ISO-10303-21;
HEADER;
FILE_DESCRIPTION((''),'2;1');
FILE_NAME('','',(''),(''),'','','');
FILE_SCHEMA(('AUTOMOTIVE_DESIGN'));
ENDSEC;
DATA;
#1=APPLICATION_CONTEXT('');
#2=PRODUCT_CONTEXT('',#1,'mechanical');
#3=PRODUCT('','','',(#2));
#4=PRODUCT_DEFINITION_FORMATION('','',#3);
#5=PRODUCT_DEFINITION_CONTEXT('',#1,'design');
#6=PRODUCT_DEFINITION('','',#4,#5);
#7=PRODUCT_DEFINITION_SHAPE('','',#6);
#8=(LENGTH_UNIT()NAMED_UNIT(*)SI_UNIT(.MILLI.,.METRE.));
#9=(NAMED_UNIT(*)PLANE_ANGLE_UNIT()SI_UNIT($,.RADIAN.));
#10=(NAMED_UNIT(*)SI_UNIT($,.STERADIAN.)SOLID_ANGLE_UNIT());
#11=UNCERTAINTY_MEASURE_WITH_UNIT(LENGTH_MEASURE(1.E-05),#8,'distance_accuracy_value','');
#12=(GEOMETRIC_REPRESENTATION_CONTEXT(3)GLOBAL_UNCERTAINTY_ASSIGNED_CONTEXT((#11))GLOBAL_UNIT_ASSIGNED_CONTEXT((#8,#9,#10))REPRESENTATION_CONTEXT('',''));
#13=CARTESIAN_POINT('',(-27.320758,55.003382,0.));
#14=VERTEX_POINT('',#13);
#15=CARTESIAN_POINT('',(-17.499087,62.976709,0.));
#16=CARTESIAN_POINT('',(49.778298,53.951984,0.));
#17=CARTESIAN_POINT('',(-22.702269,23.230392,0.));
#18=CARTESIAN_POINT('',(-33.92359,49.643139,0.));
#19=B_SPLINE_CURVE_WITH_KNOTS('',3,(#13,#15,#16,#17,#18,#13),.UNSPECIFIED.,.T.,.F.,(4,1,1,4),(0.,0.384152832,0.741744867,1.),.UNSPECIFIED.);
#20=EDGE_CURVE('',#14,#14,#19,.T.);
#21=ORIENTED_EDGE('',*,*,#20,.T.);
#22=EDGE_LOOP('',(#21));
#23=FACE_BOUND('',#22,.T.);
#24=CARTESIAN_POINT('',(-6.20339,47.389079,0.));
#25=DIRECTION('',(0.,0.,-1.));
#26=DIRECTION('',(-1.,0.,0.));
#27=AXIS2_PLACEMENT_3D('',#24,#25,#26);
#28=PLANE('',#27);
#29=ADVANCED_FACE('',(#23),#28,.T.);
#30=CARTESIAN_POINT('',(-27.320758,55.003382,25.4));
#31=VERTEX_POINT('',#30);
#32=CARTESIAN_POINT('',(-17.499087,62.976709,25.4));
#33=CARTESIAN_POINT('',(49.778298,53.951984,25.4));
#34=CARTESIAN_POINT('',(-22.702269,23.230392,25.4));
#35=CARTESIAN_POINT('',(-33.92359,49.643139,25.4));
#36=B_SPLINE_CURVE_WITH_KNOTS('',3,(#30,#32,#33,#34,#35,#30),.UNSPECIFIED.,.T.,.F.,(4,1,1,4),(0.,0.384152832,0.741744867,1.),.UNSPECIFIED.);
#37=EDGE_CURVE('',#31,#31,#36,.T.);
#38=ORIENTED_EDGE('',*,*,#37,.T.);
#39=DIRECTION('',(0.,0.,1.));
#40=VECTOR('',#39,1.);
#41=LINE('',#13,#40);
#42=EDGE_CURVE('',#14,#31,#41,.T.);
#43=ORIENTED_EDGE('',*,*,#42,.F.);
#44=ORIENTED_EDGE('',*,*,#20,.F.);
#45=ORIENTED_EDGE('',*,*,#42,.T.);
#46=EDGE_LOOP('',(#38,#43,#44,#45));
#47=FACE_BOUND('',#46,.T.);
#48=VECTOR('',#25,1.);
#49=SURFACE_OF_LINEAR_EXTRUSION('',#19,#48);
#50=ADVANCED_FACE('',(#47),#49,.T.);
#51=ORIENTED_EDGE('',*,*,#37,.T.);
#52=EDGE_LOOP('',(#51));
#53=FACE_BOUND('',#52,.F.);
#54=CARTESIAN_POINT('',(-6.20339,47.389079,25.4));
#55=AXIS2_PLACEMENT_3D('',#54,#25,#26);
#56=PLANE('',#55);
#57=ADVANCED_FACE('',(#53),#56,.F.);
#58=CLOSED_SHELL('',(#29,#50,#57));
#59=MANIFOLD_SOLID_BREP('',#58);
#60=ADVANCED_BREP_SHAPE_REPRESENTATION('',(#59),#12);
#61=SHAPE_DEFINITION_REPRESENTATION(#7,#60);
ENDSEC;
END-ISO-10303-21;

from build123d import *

# Parameters (mm, degrees)
F1_DEPTH = 25.4


with BuildPart() as f1:
    # F0 (on Top) → F1 (new body)
    with BuildSketch(Plane.XY):
        with BuildLine():
            add(Edge.make_bspline(
                [(-27.3207575083, 55.0033822656), (-17.4990871634, 62.9767087539), (49.7782982933, 53.9519843925), (-22.7022690183, 23.2303922467), (-33.9235899615, 49.6431393487), (-27.3207575083, 55.0033822656)],
                knots=[0, 0, 0, 0, 0.3841528315, 0.7417448668, 1, 1, 1, 1], degree=3))
        make_face()
    extrude(amount=F1_DEPTH)


solid = f1.part
